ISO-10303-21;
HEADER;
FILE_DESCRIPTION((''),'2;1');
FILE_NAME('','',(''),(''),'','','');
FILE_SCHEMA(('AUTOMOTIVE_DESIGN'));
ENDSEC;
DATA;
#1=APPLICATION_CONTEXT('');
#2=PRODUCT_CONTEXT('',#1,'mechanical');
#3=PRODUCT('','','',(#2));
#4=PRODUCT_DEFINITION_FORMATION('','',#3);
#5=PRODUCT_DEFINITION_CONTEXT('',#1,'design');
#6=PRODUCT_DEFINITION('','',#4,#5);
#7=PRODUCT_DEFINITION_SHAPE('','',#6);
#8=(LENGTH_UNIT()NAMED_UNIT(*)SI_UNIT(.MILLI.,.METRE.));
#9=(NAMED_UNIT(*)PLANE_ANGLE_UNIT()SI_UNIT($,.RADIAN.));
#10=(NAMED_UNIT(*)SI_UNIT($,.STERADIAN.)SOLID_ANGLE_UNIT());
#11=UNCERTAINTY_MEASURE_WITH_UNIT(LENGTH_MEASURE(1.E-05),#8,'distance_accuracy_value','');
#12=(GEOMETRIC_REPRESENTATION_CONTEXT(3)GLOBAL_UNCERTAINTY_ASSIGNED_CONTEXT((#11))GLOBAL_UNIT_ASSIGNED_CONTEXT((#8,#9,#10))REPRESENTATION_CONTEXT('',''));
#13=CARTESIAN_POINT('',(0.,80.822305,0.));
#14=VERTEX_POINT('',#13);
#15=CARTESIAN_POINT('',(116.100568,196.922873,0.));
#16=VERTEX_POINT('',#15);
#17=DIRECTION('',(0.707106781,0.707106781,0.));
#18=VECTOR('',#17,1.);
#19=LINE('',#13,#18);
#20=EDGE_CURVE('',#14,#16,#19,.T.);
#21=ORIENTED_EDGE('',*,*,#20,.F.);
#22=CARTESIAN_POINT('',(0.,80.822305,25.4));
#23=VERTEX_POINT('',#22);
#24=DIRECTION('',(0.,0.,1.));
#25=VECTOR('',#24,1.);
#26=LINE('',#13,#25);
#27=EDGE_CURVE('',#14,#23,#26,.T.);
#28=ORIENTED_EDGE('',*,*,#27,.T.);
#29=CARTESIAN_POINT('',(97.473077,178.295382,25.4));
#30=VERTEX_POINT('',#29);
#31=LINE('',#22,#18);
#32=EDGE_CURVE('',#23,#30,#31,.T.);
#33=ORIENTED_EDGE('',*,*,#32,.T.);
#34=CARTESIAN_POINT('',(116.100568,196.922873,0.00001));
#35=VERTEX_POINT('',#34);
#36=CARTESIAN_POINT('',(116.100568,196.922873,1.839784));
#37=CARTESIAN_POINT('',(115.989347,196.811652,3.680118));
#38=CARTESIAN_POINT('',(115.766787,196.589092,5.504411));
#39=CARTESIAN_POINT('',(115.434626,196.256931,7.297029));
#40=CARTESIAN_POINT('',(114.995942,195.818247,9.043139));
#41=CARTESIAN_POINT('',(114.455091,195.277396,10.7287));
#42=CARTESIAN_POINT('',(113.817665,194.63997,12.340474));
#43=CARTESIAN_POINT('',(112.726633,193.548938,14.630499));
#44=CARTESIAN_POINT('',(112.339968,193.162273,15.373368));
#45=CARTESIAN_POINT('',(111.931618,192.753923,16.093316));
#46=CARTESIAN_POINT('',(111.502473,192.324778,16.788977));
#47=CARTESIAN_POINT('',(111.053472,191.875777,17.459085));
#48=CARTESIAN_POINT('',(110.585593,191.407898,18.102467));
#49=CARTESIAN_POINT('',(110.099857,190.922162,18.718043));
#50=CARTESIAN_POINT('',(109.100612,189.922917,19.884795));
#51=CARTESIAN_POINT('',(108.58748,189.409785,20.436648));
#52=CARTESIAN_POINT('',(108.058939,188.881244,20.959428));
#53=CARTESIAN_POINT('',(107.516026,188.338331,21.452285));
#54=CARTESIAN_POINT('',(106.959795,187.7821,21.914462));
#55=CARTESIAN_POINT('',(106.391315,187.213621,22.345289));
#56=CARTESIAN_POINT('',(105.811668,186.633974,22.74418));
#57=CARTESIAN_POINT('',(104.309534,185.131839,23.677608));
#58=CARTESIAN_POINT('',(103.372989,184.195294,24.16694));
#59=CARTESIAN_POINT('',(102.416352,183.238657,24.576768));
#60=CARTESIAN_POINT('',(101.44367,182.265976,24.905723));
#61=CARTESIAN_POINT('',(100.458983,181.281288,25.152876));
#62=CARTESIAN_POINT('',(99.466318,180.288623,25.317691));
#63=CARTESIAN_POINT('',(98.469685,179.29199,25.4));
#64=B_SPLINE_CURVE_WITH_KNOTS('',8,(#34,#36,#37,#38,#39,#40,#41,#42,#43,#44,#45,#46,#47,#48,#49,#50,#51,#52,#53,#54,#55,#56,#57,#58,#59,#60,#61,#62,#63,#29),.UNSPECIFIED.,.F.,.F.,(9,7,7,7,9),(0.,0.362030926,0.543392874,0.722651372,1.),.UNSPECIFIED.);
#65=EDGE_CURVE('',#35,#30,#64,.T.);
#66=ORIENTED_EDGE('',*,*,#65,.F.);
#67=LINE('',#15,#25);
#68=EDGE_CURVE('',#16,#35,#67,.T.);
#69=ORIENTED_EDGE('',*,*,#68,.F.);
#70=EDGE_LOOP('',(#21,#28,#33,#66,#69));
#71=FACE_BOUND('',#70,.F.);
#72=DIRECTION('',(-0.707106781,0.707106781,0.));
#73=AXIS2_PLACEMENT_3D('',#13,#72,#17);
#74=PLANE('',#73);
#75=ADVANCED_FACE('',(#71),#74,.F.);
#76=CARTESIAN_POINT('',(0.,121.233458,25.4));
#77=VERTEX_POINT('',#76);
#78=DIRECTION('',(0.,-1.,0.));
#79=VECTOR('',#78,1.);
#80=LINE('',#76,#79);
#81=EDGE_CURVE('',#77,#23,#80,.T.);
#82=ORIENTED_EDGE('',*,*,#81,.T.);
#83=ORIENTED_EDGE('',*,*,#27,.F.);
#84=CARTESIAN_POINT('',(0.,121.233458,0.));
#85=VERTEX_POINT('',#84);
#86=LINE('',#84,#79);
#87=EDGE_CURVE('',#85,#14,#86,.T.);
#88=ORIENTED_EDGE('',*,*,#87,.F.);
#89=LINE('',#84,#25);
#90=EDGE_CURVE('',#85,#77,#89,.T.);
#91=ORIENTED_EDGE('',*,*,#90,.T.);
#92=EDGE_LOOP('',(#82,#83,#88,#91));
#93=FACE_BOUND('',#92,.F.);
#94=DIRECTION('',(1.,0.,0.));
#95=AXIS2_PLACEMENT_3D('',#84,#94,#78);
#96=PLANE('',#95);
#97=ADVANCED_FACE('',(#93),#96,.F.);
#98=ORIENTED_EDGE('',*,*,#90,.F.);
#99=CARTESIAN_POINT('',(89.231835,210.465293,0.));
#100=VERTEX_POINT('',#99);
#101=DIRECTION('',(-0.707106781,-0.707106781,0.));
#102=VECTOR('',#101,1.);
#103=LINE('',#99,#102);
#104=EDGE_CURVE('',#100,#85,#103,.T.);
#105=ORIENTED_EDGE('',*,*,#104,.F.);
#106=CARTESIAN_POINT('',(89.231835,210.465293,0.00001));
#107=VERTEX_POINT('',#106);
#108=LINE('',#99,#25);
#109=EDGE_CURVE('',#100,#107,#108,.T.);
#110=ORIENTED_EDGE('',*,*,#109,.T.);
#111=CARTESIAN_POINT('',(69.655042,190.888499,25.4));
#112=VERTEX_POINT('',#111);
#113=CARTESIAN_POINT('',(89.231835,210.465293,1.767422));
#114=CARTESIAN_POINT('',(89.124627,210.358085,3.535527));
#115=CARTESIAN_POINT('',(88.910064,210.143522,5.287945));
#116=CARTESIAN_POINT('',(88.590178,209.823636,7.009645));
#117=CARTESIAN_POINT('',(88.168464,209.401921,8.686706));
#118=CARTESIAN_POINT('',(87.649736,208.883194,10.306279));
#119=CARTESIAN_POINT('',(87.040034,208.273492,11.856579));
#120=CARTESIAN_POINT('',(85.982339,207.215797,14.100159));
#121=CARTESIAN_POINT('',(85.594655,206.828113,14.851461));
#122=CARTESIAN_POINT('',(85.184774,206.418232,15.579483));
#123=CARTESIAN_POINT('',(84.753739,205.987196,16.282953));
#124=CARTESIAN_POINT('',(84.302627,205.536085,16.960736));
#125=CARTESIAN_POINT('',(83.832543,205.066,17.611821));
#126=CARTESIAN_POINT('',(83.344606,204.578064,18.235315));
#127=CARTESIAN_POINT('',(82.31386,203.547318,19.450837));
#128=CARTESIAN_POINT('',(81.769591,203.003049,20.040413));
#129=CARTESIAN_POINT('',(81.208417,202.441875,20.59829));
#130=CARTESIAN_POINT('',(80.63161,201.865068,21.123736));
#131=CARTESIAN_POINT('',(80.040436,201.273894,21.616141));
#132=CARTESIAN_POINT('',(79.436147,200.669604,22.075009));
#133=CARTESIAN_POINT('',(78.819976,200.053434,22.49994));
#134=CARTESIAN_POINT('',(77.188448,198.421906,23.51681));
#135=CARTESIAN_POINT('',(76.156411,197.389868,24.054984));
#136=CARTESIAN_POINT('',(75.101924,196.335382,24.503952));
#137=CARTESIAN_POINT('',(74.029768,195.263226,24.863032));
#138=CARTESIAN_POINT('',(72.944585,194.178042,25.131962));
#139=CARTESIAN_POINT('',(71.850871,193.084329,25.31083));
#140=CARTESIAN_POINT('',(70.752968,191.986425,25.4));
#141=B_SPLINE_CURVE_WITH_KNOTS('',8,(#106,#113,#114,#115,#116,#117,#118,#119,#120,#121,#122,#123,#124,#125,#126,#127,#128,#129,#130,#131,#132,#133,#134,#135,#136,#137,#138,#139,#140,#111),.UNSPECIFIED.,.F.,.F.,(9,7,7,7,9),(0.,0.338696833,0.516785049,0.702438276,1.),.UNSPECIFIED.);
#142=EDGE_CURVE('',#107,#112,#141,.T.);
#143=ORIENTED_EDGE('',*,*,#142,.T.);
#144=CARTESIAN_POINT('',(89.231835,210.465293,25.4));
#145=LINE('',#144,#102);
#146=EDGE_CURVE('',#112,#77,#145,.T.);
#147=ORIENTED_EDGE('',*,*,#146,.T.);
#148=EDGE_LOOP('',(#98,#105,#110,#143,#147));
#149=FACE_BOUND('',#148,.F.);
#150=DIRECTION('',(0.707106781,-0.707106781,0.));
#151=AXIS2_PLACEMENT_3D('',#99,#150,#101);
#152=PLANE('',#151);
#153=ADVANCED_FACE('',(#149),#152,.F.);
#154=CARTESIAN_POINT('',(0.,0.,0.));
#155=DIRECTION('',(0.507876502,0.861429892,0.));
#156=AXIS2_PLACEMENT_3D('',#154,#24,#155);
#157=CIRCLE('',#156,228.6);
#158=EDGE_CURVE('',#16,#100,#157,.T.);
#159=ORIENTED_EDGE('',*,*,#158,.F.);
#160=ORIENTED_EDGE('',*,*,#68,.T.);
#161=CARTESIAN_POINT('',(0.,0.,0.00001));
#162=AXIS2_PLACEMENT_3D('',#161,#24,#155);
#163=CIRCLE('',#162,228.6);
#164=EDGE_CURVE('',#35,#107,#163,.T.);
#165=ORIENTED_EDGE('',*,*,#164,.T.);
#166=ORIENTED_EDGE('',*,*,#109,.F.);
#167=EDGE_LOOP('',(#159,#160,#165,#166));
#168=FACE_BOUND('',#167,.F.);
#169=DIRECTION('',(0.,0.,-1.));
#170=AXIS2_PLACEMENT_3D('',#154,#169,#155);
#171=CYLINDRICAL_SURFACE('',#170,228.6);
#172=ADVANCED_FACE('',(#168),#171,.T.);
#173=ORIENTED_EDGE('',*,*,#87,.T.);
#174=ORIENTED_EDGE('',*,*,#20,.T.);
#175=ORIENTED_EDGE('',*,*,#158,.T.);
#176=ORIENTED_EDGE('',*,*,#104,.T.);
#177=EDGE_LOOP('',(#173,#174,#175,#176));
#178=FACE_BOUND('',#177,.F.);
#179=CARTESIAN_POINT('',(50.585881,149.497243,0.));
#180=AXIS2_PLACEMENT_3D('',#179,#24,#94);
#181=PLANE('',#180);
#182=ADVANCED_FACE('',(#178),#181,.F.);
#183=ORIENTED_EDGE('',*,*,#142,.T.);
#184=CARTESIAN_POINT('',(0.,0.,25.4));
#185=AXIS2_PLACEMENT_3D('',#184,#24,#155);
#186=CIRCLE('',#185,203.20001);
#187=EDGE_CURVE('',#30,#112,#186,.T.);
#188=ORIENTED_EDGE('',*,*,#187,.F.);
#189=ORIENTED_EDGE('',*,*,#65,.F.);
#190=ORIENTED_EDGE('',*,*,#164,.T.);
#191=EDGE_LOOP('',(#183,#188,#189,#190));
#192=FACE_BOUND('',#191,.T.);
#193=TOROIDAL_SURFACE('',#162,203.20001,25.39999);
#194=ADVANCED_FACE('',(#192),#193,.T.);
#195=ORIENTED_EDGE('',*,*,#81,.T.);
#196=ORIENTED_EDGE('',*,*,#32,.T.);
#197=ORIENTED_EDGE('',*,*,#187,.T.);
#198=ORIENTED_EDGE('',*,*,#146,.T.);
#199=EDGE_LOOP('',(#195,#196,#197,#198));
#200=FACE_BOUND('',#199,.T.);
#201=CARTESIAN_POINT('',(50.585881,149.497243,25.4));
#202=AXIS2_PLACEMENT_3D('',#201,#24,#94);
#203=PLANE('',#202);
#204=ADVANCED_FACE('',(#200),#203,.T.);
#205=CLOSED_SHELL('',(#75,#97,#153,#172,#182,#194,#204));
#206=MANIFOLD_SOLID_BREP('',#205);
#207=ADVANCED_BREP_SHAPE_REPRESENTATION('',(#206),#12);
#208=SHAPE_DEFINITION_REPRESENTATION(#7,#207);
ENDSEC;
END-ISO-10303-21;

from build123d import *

# Parameters (mm, degrees)
F2_DEPTH = 25.4
F3_R     = 25.39999


# Not quite as in the source:
# - a fillet or chamfer is up to 0.001 mm smaller than in the source, because OpenCascade refuses the exact size


with BuildPart() as f2:
    # F1 (on face) → F2 (new body)
    with BuildSketch(Plane.XY):
        with BuildLine():
            Line((0, 121.2334576344), (0, 80.8223050896))
            Line((0, 80.8223050896), (116.1005682623, 196.9228733519))
            ThreePointArc((116.1005682623, 196.9228733519), (102.889252487, 204.1366251379), (89.2318353651, 210.4652929995))
            Line((89.2318353651, 210.4652929995), (0, 121.2334576344))
        make_face()
    extrude(amount=F2_DEPTH)

    # F3 (radius 25.4 in the source; OpenCascade refuses exactly that, so slightly less here)
    f3_edges = [f2.edges().sort_by_distance(p)[0] for p in [
        (102.889252, 204.136625, 25.4),
    ]]
    fillet(f3_edges, radius=F3_R)


solid = f2.part
